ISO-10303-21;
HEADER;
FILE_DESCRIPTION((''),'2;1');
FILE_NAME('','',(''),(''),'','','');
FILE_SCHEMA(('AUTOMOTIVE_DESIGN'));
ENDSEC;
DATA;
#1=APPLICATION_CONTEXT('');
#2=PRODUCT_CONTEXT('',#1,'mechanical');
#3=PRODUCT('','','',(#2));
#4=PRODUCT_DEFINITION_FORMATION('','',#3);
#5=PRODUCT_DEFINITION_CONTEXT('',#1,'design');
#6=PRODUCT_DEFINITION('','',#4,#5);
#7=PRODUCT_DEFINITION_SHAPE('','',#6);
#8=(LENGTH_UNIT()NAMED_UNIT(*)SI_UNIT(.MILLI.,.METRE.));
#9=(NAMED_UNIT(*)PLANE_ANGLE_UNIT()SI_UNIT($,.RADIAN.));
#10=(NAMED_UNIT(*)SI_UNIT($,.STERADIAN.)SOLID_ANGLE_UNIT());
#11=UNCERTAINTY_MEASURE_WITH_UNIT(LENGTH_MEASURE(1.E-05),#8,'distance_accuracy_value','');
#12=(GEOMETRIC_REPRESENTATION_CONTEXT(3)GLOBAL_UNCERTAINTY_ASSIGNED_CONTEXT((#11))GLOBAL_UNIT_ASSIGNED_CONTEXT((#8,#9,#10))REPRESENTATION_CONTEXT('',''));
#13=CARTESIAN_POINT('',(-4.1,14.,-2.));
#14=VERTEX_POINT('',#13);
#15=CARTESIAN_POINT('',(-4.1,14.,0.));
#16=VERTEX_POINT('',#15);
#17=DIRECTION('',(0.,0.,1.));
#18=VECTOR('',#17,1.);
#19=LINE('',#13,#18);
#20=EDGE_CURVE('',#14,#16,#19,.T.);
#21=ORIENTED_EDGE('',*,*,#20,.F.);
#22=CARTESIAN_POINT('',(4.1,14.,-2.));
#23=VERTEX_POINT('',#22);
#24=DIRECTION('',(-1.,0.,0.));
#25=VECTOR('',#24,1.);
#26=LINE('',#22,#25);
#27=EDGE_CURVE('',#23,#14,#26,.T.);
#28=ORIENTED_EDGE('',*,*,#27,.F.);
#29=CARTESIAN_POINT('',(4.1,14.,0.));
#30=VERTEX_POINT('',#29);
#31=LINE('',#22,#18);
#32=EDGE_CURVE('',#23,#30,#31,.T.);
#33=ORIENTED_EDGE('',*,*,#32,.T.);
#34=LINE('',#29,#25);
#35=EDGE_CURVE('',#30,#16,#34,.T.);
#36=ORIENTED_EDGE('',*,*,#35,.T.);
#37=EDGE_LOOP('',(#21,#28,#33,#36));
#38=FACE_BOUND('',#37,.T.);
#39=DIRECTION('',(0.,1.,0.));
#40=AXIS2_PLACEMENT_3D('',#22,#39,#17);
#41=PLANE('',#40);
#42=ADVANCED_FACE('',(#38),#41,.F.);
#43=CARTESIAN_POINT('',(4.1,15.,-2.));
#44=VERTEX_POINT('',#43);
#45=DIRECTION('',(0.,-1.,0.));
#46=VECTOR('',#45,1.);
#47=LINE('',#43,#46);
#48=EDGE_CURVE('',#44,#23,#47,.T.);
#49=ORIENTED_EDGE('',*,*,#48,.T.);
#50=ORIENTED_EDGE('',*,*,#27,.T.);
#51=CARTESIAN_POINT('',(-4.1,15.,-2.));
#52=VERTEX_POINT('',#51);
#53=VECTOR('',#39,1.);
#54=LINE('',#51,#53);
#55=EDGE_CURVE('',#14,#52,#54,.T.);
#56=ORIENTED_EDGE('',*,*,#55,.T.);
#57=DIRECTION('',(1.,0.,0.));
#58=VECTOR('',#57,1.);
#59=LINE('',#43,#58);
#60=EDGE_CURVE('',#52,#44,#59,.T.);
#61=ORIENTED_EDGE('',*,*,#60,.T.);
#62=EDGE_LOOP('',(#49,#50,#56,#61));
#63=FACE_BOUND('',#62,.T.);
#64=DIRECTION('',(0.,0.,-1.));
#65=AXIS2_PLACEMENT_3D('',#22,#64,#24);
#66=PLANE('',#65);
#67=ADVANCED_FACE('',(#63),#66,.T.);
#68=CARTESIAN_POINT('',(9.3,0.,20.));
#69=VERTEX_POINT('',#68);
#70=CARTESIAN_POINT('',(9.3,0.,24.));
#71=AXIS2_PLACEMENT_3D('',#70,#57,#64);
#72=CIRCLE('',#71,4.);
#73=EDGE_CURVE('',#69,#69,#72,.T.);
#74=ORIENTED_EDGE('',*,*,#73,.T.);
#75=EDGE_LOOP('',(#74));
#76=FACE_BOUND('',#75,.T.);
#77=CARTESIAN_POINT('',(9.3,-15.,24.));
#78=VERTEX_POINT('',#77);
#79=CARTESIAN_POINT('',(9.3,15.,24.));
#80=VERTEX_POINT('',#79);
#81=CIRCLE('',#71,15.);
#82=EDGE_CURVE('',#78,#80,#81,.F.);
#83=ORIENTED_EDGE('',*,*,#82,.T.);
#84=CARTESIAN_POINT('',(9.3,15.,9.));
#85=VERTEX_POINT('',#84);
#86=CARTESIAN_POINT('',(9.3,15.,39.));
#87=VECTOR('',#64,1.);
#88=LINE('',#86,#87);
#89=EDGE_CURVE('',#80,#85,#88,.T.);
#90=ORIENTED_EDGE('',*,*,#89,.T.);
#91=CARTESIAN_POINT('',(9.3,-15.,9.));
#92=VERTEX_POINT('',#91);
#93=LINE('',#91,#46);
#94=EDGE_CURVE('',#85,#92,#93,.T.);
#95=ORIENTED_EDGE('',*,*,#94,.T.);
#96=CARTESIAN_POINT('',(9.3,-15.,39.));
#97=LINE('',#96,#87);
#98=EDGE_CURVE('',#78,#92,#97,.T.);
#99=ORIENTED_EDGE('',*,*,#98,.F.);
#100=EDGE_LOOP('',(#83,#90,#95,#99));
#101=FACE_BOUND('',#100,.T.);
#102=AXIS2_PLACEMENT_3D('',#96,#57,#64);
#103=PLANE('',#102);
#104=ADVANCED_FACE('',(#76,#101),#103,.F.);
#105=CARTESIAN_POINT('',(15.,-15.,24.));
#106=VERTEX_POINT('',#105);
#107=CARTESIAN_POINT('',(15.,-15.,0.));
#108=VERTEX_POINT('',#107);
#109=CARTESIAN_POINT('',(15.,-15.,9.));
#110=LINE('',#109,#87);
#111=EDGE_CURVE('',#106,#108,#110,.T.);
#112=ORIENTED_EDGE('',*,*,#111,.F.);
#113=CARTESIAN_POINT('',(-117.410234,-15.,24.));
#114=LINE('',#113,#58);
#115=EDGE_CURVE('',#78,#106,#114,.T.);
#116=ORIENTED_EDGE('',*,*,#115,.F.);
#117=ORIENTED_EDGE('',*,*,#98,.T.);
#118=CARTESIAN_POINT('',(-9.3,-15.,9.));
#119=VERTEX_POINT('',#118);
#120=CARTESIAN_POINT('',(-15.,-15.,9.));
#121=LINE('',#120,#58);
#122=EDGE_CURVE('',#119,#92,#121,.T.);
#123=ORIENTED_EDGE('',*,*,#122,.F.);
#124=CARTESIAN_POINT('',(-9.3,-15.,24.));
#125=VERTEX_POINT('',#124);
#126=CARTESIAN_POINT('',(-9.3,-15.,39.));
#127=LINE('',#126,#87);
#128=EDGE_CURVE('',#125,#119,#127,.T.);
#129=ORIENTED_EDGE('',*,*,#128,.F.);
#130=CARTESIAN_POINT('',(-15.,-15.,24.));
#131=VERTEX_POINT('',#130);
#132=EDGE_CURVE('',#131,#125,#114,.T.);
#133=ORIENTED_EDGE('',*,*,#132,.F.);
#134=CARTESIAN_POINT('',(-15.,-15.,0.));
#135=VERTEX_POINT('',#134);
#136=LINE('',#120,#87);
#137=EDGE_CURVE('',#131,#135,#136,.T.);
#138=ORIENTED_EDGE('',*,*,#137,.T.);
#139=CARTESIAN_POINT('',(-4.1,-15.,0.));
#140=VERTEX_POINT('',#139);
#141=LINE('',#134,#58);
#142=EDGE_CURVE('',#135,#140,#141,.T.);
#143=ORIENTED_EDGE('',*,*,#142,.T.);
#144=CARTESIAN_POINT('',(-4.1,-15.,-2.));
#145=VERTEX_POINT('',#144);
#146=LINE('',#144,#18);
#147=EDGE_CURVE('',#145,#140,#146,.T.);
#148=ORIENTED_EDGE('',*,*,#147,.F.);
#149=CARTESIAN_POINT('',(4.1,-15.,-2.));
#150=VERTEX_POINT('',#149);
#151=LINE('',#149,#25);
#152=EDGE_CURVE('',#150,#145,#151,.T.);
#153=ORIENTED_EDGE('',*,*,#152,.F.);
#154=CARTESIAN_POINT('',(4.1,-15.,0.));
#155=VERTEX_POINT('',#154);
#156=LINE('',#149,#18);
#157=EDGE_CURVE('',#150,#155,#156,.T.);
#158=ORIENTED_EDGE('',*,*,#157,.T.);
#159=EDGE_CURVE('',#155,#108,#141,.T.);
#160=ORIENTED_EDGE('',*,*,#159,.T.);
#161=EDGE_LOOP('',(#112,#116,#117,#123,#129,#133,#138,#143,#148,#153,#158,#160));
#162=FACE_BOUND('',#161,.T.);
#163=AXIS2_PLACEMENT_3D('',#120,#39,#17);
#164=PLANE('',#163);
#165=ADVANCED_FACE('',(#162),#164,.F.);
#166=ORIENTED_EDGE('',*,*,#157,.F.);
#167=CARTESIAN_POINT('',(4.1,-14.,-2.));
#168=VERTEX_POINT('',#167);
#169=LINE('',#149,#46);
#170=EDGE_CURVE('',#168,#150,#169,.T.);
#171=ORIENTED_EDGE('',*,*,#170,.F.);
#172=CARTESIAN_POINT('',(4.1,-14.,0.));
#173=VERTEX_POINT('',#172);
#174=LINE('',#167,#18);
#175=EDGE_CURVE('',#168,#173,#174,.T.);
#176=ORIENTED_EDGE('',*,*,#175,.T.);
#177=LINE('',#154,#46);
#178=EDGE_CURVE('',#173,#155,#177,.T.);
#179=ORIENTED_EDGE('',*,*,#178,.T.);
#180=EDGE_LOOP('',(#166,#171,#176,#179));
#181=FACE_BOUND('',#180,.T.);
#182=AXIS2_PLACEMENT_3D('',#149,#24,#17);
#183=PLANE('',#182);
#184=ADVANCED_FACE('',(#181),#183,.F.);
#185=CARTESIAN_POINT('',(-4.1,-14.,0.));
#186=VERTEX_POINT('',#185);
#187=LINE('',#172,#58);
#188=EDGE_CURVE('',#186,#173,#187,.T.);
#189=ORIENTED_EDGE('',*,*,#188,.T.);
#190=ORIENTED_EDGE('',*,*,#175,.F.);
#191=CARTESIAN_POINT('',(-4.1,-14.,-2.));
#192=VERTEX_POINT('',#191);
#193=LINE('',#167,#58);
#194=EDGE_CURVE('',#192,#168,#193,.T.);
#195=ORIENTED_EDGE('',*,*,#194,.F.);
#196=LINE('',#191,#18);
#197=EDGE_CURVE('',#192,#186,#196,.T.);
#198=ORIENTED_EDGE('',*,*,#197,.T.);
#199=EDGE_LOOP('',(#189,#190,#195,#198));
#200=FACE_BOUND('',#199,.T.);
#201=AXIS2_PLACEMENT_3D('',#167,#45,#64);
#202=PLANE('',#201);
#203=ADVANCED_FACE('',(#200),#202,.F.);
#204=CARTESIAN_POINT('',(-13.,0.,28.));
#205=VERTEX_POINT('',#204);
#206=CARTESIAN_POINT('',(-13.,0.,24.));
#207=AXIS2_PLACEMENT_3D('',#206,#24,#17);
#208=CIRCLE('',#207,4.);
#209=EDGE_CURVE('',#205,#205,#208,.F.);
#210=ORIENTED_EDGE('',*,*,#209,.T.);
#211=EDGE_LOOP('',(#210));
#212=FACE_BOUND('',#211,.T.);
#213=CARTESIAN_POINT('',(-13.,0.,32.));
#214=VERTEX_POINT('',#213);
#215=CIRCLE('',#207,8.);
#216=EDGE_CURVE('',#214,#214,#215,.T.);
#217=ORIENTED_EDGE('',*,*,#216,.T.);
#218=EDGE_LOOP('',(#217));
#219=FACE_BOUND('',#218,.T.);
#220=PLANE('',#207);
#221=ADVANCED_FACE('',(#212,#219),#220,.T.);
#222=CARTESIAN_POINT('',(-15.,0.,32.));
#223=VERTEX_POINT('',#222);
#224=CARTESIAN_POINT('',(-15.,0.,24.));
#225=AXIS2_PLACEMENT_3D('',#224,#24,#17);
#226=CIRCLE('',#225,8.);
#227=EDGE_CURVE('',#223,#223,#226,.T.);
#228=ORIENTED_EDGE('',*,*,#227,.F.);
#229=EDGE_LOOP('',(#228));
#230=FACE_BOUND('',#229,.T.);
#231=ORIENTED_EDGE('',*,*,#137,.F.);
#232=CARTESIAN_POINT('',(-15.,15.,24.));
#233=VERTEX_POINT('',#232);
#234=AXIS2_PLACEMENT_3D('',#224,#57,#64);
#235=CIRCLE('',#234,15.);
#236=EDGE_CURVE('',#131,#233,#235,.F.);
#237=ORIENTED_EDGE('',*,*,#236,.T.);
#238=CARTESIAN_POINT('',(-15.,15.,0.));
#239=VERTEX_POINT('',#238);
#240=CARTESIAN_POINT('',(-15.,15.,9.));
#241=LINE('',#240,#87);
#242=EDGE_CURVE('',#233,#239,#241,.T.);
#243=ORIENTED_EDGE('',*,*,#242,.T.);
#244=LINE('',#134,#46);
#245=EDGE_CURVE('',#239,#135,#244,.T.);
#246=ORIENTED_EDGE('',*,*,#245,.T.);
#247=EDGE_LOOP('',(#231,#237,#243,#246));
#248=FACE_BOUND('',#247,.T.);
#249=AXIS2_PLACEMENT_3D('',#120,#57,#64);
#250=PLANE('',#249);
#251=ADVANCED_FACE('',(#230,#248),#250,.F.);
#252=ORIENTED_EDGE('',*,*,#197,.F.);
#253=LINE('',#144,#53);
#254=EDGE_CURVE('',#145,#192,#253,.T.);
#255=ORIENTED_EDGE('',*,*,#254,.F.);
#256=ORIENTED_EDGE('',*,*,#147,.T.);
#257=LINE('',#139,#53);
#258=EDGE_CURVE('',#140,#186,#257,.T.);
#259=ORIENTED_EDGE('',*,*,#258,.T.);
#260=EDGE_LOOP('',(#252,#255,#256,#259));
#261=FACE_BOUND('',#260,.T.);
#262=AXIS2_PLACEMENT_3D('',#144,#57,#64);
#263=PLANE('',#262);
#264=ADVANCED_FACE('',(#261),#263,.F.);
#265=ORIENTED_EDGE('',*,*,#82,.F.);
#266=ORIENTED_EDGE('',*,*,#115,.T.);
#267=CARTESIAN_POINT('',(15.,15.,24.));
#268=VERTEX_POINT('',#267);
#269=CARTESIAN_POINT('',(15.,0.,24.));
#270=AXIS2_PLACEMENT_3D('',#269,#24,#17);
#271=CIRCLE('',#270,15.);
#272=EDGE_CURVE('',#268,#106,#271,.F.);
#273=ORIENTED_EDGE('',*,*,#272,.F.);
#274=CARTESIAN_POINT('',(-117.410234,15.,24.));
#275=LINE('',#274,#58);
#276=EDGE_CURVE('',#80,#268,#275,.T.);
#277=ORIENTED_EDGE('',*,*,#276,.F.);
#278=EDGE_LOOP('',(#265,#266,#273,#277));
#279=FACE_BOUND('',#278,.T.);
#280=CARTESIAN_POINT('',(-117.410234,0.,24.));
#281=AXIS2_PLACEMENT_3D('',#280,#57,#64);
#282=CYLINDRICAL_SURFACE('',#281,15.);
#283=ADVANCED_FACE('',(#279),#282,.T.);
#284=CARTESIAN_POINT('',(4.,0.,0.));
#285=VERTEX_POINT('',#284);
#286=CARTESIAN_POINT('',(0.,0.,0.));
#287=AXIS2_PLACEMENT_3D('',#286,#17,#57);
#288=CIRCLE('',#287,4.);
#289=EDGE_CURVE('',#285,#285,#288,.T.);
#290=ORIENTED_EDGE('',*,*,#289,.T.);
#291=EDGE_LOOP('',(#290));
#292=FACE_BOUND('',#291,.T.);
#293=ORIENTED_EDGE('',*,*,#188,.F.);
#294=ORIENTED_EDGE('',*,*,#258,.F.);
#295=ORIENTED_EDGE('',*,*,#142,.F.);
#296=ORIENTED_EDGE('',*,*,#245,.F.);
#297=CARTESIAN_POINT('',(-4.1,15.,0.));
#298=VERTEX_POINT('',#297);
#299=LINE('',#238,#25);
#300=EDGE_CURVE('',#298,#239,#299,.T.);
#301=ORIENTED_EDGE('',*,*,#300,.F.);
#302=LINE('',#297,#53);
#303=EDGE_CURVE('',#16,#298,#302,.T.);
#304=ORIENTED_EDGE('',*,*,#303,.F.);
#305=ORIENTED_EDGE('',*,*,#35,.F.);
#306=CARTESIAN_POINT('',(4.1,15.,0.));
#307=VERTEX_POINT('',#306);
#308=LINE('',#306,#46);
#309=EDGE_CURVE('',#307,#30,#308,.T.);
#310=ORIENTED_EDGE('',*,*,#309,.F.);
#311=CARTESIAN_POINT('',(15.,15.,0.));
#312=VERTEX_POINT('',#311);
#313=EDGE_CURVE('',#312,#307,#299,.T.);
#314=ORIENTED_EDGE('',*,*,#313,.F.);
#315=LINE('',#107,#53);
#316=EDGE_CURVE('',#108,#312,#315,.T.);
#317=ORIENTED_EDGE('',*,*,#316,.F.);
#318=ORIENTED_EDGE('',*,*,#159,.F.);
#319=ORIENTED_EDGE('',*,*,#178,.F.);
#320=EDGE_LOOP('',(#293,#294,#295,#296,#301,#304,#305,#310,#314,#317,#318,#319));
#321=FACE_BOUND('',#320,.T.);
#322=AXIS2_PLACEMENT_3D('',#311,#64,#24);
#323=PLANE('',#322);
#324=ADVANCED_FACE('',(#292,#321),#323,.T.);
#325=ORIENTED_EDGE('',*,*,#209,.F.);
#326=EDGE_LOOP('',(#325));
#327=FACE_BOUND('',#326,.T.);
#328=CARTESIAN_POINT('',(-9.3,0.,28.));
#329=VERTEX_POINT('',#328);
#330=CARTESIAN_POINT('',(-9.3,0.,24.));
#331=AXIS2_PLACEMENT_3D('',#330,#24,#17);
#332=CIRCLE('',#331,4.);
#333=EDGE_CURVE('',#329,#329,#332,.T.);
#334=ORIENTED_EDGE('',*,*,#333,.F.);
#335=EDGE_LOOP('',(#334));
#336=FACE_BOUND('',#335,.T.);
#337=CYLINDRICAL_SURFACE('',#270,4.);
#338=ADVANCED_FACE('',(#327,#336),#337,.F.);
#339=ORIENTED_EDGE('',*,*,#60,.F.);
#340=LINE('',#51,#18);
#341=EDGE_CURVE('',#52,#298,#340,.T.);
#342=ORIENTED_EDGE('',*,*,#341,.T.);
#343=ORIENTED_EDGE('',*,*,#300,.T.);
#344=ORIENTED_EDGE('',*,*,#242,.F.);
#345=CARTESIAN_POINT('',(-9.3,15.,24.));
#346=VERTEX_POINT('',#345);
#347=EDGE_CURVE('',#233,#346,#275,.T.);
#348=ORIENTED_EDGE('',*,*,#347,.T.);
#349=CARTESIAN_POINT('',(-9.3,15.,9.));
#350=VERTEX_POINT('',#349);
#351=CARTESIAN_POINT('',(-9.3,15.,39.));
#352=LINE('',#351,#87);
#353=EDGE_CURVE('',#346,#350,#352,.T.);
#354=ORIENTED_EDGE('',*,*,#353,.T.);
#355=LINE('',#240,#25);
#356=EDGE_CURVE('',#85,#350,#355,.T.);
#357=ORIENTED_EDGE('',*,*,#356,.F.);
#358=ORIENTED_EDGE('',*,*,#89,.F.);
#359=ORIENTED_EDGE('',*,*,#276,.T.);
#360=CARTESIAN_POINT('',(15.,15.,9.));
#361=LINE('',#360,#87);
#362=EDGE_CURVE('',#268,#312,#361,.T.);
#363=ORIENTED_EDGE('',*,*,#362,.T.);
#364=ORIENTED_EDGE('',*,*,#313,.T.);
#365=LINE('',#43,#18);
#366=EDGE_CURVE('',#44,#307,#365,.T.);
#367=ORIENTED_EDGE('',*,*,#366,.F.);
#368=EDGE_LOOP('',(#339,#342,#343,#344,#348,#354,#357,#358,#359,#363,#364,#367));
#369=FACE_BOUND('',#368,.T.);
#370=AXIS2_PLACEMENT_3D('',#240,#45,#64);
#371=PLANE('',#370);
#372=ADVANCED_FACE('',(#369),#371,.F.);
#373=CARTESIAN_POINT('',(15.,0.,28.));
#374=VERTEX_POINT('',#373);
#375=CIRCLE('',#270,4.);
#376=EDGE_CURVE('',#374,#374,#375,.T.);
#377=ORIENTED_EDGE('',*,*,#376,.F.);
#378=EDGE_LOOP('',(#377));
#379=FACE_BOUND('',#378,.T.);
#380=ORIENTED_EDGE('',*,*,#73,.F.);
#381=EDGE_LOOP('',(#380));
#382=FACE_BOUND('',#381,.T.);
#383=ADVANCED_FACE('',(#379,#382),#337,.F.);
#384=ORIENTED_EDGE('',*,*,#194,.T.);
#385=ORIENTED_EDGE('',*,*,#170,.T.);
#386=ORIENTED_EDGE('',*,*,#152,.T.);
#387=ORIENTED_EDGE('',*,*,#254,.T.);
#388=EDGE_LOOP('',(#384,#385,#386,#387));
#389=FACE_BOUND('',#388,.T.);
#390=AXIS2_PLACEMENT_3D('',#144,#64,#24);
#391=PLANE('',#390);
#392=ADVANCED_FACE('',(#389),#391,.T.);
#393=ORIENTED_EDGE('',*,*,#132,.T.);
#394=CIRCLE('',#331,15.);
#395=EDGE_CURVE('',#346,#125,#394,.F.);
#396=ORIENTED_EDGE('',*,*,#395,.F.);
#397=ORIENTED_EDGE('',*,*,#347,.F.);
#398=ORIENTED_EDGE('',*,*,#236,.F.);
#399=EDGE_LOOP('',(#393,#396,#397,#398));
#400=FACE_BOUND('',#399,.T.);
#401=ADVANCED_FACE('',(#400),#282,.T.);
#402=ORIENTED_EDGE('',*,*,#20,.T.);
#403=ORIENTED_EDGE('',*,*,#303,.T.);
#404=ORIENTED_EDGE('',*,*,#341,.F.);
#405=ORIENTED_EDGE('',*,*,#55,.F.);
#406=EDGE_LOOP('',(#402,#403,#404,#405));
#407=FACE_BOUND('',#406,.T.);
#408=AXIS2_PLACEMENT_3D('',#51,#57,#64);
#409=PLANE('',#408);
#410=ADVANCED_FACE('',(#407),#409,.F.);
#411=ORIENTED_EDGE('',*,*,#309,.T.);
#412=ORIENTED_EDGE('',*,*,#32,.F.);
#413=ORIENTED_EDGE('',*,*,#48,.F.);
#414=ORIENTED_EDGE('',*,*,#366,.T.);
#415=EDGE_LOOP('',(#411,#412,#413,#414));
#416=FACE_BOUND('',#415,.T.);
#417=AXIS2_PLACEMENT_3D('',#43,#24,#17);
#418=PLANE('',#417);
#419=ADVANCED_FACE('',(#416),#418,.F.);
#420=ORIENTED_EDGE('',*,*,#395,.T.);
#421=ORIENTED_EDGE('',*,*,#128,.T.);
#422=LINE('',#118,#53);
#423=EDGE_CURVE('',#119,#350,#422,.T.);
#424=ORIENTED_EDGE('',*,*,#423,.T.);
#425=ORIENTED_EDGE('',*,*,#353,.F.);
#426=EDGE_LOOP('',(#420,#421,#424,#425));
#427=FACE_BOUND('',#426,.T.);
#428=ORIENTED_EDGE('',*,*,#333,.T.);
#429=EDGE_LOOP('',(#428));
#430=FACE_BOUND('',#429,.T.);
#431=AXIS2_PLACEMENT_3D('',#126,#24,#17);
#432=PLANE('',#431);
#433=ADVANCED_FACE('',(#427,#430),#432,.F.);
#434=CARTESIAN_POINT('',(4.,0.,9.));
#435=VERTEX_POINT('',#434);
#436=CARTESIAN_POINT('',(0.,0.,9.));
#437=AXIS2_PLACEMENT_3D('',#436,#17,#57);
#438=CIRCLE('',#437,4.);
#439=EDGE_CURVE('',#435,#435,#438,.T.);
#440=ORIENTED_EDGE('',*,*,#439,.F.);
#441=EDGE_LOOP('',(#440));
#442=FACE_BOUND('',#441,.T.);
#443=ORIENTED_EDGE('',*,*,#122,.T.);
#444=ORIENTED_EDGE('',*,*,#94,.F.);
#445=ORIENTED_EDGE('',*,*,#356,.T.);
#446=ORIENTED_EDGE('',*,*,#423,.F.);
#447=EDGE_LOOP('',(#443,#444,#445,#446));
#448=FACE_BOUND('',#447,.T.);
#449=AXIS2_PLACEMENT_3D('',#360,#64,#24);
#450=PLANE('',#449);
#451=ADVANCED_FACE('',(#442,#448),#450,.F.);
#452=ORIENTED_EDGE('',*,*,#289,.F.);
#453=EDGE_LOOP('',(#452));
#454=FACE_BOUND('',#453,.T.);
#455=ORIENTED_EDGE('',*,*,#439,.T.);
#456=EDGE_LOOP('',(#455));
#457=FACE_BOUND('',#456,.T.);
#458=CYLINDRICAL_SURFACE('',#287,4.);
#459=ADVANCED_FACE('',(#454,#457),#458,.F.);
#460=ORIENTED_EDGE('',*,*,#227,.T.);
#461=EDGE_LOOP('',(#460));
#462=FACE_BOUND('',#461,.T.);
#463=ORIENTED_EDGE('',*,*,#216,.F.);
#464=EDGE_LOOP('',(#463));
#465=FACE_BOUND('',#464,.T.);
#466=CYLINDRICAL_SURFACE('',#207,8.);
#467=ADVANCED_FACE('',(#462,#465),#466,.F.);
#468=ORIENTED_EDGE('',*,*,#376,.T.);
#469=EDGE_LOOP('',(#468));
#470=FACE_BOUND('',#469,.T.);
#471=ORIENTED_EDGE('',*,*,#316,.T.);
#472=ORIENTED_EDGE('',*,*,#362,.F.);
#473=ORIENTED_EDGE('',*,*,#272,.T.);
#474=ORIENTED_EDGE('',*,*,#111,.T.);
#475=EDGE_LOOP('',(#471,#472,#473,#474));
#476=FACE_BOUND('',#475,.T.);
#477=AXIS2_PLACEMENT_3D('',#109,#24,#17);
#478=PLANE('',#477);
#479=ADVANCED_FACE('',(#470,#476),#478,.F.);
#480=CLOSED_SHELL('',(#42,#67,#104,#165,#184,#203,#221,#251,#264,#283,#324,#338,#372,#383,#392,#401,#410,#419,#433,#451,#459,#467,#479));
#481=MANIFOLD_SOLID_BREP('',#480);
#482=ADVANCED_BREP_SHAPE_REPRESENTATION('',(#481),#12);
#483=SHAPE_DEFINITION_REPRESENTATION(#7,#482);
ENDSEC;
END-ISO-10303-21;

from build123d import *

# Parameters (mm, degrees)
SKETCH_1_W          = 30
SKETCH_1_H          = 30
EXTRUDE_1_DEPTH     = 9
SKETCH_2_W          = 5.7
SKETCH_2_H          = 30
EXTRUDE_2_DEPTH     = 30
CUT_EXTRUDE_START   = -30
CUT_EXTRUDE_2_DEPTH = 30
SKETCH_4_R          = 4
CUT_EXTRUDE_3_DEPTH = 52.439284598
SKETCH_5_R          = 8
CUT_EXTRUDE_4_DEPTH = 2
SKETCH_6_R          = 4
CUT_EXTRUDE_5_DEPTH = 37.742346142
SKETCH_7_W          = 8.2
SKETCH_7_H          = 1
EXTRUDE_3_DEPTH     = 2


# Read off the part's stored shape, not the designer's step: 切除-拉伸2
with BuildPart() as part:
    # 草图1 → 凸台-拉伸1 (new body)
    with BuildSketch(Plane.XY):
        Rectangle(SKETCH_1_W, SKETCH_1_H)
    extrude(amount=EXTRUDE_1_DEPTH)

    # 草图2 → 凸台-拉伸2 (add)
    with BuildSketch(Plane.XY.offset(9)):
        with Locations((-12.15, 0)):
            Rectangle(SKETCH_2_W, SKETCH_2_H)
        with Locations((12.15, 0)):
            Rectangle(SKETCH_2_W, SKETCH_2_H)
    extrude(amount=EXTRUDE_2_DEPTH)

    # 切除-拉伸2 outline → 切除-拉伸2 (cut)
    with BuildSketch(Plane.ZY.offset(15).offset(CUT_EXTRUDE_START)):
        with BuildLine():
            Line((39, 15), (24, 15))
            ThreePointArc((24, 15), (34.606601718, 10.606601718), (39, 0))
            Line((39, 0), (39, 15))
        make_face()
        with BuildLine():
            Line((39, -15), (39, 0))
            ThreePointArc((39, 0), (34.606601718, -10.606601718), (24, -15))
            Line((24, -15), (39, -15))
        make_face()
    extrude(amount=CUT_EXTRUDE_2_DEPTH, mode=Mode.SUBTRACT)

    # 草图4 → 切除-拉伸3 (cut, through all)
    with BuildSketch(Plane.ZY.offset(15)):
        with Locations((24, 0)):
            Circle(SKETCH_4_R)
    extrude(amount=-CUT_EXTRUDE_3_DEPTH, mode=Mode.SUBTRACT)

    # 草图5 → 切除-拉伸4 (cut)
    with BuildSketch(Plane.ZY.offset(15)):
        with Locations((24, 0)):
            Circle(SKETCH_5_R)
    extrude(amount=-CUT_EXTRUDE_4_DEPTH, mode=Mode.SUBTRACT)

    # 草图6 → 切除-拉伸5 (cut, through all)
    with BuildSketch(Plane.XY.offset(9)):
        Circle(SKETCH_6_R)
    extrude(amount=-CUT_EXTRUDE_5_DEPTH, mode=Mode.SUBTRACT)

    # 草图7 → 凸台-拉伸3 (add)
    with BuildSketch(Plane(origin=(0, 0, 0), x_dir=(-1, 0, 0), z_dir=(0, 0, -1))):
        with Locations((0, 14.5)):
            Rectangle(SKETCH_7_W, SKETCH_7_H)
        with Locations((0, -14.5)):
            Rectangle(SKETCH_7_W, SKETCH_7_H)
    extrude(amount=EXTRUDE_3_DEPTH)


solid = part.part
